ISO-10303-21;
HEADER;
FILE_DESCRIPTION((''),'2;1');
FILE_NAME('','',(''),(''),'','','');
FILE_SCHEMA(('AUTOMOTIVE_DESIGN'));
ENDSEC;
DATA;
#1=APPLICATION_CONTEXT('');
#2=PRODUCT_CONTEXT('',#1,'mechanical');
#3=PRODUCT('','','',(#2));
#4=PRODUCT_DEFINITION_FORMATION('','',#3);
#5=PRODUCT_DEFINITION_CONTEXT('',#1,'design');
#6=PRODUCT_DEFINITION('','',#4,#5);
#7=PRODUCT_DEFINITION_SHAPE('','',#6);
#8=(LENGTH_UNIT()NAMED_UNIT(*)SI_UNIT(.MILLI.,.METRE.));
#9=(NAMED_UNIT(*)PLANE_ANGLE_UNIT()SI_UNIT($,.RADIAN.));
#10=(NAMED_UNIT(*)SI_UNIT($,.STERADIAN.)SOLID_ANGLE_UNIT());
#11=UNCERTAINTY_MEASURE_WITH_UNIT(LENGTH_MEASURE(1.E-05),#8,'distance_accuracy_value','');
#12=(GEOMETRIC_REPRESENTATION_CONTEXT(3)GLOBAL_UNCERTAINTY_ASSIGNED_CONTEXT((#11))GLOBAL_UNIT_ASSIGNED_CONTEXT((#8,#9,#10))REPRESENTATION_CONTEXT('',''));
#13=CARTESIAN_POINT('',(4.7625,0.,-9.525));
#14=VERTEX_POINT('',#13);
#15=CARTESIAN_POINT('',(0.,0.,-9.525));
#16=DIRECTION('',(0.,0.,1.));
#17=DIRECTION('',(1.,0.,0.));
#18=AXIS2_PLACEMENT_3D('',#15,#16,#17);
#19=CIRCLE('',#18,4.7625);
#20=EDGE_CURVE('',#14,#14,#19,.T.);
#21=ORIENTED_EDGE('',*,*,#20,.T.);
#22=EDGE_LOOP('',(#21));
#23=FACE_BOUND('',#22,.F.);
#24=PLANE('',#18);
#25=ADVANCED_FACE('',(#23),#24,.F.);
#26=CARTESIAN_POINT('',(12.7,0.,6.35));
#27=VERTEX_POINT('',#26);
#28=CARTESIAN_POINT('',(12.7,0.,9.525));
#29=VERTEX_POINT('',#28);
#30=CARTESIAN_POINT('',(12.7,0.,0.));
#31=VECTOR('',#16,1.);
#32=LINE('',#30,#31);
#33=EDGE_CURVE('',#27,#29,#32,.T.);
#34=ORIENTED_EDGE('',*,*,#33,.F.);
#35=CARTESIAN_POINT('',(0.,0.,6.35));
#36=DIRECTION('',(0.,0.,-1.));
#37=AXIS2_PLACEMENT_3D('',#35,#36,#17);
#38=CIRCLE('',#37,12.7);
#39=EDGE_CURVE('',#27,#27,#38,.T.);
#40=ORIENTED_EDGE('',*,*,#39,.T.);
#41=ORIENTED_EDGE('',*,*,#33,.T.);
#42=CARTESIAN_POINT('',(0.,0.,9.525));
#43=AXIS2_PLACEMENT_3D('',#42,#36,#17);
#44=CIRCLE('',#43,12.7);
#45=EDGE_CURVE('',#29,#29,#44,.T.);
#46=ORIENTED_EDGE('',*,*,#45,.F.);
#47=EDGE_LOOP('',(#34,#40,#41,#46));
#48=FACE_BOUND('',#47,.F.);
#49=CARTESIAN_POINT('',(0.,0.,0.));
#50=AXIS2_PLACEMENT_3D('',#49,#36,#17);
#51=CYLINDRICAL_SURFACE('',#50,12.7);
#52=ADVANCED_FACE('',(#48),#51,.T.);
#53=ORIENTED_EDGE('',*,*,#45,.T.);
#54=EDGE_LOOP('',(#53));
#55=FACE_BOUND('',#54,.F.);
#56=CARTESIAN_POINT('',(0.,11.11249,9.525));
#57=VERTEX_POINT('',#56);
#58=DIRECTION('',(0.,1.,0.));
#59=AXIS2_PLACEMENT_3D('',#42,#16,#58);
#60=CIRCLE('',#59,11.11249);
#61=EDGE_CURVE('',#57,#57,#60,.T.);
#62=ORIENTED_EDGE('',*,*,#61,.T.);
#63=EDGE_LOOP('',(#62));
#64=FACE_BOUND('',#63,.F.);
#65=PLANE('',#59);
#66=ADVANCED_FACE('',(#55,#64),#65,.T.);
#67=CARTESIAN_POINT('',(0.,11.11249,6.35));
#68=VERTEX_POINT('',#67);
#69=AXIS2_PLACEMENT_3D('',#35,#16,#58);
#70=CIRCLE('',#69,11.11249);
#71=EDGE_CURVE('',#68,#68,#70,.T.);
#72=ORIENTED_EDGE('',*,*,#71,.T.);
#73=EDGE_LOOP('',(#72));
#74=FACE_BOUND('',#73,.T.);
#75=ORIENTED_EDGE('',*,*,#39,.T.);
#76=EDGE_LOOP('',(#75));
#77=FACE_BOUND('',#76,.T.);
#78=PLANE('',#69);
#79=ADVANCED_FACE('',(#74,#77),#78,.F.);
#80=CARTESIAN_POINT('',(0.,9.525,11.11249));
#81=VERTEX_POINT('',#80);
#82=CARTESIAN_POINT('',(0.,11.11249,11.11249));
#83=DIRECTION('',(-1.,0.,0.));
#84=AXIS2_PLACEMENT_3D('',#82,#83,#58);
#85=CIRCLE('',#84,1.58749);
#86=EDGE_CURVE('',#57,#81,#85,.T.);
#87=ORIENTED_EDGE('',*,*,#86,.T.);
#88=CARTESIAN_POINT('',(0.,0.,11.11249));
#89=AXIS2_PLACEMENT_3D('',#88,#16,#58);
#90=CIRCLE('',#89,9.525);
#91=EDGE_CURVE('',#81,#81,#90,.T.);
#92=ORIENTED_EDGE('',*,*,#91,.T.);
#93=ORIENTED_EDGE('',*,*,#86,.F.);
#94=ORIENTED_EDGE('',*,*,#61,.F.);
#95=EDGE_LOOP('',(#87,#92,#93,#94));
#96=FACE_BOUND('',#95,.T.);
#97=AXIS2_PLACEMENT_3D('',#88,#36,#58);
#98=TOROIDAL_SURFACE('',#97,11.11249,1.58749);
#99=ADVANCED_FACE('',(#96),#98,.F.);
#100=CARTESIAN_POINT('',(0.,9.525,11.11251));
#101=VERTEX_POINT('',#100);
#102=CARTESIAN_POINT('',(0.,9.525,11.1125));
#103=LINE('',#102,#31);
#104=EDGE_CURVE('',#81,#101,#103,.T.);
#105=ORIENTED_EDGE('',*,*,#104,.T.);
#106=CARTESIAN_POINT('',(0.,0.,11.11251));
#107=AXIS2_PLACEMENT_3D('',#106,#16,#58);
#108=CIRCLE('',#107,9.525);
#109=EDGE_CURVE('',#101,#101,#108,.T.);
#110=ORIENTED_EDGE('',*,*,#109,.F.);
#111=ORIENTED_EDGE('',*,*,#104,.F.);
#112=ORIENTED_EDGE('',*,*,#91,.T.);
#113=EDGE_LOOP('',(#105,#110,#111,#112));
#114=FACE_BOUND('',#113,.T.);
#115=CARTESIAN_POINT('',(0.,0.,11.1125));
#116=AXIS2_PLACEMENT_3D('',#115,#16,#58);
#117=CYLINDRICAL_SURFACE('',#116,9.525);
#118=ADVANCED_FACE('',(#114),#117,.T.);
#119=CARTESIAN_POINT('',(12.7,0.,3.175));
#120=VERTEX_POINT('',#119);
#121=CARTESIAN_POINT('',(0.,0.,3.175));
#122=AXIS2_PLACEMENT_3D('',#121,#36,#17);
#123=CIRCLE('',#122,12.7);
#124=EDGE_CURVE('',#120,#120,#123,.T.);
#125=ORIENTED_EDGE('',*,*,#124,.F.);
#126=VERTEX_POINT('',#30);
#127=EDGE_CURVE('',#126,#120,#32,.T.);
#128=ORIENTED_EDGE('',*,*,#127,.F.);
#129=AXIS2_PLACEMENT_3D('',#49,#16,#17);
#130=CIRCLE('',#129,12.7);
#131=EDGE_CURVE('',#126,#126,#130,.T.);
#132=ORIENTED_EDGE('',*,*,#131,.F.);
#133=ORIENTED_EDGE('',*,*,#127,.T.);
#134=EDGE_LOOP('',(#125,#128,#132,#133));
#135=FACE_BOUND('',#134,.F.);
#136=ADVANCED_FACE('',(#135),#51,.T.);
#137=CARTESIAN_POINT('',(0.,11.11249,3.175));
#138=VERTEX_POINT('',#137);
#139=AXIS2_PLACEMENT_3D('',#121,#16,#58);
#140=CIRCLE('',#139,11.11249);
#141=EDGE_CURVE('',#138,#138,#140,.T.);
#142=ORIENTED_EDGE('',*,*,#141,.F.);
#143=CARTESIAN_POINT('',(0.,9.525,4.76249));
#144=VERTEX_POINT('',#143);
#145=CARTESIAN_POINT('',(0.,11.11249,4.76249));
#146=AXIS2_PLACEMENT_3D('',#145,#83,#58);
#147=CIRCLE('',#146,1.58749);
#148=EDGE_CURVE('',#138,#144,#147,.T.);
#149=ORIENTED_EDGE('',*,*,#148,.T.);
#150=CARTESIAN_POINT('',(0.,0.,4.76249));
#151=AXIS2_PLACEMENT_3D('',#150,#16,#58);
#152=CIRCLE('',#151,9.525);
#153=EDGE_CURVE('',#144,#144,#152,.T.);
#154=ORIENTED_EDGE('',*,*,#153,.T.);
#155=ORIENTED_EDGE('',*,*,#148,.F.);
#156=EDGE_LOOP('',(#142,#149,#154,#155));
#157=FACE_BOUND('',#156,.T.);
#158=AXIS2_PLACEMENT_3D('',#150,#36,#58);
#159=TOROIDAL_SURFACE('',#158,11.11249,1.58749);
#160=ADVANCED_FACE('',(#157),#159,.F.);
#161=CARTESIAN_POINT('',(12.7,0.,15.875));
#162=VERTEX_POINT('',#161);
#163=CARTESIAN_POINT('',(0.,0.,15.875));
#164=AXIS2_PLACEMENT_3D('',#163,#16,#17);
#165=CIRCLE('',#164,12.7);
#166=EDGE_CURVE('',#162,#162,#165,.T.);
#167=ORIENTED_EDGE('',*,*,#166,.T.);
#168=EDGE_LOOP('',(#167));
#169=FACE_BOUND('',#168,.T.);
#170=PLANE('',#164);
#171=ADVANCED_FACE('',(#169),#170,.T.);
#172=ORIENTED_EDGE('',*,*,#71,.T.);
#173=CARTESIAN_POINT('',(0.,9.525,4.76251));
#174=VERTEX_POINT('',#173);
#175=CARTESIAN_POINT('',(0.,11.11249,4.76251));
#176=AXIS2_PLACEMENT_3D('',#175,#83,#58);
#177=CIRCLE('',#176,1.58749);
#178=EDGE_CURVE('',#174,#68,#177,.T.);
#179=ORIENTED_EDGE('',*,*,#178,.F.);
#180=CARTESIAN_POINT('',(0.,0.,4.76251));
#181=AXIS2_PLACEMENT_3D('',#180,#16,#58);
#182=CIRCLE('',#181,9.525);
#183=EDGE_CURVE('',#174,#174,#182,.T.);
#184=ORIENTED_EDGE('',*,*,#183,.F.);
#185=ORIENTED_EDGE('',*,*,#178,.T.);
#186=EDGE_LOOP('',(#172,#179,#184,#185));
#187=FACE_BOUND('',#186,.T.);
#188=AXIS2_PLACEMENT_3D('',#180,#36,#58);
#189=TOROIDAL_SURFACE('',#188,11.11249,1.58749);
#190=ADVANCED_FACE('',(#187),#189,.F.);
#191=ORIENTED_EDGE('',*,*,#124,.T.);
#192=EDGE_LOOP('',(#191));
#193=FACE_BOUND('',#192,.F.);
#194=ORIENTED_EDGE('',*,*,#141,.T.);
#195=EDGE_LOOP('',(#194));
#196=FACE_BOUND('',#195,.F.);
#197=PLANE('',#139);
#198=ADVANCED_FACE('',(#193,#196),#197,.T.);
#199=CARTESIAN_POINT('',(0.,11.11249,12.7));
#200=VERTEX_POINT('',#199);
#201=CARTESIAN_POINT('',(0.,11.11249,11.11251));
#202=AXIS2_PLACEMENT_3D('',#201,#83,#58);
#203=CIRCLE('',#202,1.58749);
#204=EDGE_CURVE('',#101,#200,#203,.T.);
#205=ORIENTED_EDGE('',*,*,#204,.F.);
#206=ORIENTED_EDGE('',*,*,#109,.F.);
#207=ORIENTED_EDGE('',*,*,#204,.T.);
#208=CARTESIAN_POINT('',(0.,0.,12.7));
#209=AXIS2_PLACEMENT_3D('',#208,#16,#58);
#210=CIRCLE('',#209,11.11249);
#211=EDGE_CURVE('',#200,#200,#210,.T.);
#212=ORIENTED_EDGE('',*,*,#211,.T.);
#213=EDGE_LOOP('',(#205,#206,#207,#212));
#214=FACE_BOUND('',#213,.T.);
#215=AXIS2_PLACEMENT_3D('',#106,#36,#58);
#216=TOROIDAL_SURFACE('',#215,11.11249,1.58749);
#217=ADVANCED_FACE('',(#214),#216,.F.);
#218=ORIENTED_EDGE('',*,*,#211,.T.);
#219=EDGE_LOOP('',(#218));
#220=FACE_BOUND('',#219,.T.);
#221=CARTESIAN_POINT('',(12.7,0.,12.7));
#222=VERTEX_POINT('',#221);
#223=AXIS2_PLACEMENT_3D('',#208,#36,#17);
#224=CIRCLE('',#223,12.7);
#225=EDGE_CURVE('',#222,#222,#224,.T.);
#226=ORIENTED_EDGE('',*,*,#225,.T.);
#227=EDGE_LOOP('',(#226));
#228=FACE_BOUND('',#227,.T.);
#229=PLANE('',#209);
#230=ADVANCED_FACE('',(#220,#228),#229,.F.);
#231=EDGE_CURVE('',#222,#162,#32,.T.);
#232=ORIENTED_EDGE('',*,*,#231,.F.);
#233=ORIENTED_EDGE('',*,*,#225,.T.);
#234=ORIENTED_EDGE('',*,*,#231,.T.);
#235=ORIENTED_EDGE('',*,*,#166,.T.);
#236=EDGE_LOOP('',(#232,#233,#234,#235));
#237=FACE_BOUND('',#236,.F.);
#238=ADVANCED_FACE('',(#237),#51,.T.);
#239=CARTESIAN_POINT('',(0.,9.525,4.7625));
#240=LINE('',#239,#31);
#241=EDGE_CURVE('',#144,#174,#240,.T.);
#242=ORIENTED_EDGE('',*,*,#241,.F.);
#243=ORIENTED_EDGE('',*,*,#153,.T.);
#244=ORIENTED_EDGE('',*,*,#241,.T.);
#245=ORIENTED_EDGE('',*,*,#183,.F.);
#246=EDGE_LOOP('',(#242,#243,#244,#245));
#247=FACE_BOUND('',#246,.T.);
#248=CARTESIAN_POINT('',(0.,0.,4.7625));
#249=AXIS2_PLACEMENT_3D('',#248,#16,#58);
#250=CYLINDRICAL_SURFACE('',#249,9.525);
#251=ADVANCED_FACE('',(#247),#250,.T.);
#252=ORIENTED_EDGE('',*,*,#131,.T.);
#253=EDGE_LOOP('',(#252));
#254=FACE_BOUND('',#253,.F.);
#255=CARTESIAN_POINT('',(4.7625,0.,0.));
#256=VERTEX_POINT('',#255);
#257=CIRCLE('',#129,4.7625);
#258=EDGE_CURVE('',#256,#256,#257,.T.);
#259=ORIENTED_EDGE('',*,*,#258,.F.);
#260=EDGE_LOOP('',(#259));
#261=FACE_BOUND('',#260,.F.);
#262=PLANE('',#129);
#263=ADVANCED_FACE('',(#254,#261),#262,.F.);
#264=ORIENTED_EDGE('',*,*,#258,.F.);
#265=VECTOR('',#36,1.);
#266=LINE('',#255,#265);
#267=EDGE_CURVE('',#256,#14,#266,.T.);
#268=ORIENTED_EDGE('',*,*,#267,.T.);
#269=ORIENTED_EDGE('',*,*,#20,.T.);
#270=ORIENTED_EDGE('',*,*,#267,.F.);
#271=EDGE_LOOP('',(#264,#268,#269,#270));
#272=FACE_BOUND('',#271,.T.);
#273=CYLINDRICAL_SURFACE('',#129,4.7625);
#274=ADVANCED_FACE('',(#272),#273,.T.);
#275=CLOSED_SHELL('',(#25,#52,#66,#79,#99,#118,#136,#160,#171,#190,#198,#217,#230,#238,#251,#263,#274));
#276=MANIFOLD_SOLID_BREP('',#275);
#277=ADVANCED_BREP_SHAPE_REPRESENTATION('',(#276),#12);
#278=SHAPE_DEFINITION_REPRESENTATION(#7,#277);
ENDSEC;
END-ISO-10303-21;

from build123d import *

# Parameters (mm, degrees)
F0_R     = 12.7
F0_R_2   = 4.7625
F1_DEPTH = 15.875
F3_DEPTH = 9.525
F4_W     = 3.175
F4_H     = 3.175
F6_R     = 1.58749


# Not quite as in the source:
# - a fillet or chamfer is up to 0.001 mm smaller than in the source, because OpenCascade refuses the exact size


with BuildPart() as f1:
    # F0 (on Top) → F1 (new body)
    with BuildSketch(Plane.XY):
        Circle(F0_R)
        Circle(F0_R_2, mode=Mode.SUBTRACT)
        Circle(F0_R_2)
    extrude(amount=F1_DEPTH)

    # F0 (on Top) → F3 (join)
    with BuildSketch(Plane.XY):
        Circle(F0_R_2)
    extrude(amount=-F3_DEPTH)

    # F4 (on Right) → F5 (revolve, cut)
    with BuildSketch(Plane.YZ):
        with Locations((11.1125, 4.7625)):
            Rectangle(F4_W, F4_H)
        with Locations((11.1125, 11.1125)):
            Rectangle(F4_W, F4_H)
    revolve(axis=Axis((0, 0, -0.284396112), (0, 0, 1)), mode=Mode.SUBTRACT)

    # F6 (radius 1.5875 in the source; OpenCascade refuses exactly that, so slightly less here)
    f6_edges = [f1.edges().sort_by_distance(p)[0] for p in [
        (0, -9.525, 3.175),
        (0, -9.525, 6.35),
        (0, -9.525, 9.525),
        (0, -9.525, 12.7),
    ]]
    fillet(f6_edges, radius=F6_R)


solid = f1.part
